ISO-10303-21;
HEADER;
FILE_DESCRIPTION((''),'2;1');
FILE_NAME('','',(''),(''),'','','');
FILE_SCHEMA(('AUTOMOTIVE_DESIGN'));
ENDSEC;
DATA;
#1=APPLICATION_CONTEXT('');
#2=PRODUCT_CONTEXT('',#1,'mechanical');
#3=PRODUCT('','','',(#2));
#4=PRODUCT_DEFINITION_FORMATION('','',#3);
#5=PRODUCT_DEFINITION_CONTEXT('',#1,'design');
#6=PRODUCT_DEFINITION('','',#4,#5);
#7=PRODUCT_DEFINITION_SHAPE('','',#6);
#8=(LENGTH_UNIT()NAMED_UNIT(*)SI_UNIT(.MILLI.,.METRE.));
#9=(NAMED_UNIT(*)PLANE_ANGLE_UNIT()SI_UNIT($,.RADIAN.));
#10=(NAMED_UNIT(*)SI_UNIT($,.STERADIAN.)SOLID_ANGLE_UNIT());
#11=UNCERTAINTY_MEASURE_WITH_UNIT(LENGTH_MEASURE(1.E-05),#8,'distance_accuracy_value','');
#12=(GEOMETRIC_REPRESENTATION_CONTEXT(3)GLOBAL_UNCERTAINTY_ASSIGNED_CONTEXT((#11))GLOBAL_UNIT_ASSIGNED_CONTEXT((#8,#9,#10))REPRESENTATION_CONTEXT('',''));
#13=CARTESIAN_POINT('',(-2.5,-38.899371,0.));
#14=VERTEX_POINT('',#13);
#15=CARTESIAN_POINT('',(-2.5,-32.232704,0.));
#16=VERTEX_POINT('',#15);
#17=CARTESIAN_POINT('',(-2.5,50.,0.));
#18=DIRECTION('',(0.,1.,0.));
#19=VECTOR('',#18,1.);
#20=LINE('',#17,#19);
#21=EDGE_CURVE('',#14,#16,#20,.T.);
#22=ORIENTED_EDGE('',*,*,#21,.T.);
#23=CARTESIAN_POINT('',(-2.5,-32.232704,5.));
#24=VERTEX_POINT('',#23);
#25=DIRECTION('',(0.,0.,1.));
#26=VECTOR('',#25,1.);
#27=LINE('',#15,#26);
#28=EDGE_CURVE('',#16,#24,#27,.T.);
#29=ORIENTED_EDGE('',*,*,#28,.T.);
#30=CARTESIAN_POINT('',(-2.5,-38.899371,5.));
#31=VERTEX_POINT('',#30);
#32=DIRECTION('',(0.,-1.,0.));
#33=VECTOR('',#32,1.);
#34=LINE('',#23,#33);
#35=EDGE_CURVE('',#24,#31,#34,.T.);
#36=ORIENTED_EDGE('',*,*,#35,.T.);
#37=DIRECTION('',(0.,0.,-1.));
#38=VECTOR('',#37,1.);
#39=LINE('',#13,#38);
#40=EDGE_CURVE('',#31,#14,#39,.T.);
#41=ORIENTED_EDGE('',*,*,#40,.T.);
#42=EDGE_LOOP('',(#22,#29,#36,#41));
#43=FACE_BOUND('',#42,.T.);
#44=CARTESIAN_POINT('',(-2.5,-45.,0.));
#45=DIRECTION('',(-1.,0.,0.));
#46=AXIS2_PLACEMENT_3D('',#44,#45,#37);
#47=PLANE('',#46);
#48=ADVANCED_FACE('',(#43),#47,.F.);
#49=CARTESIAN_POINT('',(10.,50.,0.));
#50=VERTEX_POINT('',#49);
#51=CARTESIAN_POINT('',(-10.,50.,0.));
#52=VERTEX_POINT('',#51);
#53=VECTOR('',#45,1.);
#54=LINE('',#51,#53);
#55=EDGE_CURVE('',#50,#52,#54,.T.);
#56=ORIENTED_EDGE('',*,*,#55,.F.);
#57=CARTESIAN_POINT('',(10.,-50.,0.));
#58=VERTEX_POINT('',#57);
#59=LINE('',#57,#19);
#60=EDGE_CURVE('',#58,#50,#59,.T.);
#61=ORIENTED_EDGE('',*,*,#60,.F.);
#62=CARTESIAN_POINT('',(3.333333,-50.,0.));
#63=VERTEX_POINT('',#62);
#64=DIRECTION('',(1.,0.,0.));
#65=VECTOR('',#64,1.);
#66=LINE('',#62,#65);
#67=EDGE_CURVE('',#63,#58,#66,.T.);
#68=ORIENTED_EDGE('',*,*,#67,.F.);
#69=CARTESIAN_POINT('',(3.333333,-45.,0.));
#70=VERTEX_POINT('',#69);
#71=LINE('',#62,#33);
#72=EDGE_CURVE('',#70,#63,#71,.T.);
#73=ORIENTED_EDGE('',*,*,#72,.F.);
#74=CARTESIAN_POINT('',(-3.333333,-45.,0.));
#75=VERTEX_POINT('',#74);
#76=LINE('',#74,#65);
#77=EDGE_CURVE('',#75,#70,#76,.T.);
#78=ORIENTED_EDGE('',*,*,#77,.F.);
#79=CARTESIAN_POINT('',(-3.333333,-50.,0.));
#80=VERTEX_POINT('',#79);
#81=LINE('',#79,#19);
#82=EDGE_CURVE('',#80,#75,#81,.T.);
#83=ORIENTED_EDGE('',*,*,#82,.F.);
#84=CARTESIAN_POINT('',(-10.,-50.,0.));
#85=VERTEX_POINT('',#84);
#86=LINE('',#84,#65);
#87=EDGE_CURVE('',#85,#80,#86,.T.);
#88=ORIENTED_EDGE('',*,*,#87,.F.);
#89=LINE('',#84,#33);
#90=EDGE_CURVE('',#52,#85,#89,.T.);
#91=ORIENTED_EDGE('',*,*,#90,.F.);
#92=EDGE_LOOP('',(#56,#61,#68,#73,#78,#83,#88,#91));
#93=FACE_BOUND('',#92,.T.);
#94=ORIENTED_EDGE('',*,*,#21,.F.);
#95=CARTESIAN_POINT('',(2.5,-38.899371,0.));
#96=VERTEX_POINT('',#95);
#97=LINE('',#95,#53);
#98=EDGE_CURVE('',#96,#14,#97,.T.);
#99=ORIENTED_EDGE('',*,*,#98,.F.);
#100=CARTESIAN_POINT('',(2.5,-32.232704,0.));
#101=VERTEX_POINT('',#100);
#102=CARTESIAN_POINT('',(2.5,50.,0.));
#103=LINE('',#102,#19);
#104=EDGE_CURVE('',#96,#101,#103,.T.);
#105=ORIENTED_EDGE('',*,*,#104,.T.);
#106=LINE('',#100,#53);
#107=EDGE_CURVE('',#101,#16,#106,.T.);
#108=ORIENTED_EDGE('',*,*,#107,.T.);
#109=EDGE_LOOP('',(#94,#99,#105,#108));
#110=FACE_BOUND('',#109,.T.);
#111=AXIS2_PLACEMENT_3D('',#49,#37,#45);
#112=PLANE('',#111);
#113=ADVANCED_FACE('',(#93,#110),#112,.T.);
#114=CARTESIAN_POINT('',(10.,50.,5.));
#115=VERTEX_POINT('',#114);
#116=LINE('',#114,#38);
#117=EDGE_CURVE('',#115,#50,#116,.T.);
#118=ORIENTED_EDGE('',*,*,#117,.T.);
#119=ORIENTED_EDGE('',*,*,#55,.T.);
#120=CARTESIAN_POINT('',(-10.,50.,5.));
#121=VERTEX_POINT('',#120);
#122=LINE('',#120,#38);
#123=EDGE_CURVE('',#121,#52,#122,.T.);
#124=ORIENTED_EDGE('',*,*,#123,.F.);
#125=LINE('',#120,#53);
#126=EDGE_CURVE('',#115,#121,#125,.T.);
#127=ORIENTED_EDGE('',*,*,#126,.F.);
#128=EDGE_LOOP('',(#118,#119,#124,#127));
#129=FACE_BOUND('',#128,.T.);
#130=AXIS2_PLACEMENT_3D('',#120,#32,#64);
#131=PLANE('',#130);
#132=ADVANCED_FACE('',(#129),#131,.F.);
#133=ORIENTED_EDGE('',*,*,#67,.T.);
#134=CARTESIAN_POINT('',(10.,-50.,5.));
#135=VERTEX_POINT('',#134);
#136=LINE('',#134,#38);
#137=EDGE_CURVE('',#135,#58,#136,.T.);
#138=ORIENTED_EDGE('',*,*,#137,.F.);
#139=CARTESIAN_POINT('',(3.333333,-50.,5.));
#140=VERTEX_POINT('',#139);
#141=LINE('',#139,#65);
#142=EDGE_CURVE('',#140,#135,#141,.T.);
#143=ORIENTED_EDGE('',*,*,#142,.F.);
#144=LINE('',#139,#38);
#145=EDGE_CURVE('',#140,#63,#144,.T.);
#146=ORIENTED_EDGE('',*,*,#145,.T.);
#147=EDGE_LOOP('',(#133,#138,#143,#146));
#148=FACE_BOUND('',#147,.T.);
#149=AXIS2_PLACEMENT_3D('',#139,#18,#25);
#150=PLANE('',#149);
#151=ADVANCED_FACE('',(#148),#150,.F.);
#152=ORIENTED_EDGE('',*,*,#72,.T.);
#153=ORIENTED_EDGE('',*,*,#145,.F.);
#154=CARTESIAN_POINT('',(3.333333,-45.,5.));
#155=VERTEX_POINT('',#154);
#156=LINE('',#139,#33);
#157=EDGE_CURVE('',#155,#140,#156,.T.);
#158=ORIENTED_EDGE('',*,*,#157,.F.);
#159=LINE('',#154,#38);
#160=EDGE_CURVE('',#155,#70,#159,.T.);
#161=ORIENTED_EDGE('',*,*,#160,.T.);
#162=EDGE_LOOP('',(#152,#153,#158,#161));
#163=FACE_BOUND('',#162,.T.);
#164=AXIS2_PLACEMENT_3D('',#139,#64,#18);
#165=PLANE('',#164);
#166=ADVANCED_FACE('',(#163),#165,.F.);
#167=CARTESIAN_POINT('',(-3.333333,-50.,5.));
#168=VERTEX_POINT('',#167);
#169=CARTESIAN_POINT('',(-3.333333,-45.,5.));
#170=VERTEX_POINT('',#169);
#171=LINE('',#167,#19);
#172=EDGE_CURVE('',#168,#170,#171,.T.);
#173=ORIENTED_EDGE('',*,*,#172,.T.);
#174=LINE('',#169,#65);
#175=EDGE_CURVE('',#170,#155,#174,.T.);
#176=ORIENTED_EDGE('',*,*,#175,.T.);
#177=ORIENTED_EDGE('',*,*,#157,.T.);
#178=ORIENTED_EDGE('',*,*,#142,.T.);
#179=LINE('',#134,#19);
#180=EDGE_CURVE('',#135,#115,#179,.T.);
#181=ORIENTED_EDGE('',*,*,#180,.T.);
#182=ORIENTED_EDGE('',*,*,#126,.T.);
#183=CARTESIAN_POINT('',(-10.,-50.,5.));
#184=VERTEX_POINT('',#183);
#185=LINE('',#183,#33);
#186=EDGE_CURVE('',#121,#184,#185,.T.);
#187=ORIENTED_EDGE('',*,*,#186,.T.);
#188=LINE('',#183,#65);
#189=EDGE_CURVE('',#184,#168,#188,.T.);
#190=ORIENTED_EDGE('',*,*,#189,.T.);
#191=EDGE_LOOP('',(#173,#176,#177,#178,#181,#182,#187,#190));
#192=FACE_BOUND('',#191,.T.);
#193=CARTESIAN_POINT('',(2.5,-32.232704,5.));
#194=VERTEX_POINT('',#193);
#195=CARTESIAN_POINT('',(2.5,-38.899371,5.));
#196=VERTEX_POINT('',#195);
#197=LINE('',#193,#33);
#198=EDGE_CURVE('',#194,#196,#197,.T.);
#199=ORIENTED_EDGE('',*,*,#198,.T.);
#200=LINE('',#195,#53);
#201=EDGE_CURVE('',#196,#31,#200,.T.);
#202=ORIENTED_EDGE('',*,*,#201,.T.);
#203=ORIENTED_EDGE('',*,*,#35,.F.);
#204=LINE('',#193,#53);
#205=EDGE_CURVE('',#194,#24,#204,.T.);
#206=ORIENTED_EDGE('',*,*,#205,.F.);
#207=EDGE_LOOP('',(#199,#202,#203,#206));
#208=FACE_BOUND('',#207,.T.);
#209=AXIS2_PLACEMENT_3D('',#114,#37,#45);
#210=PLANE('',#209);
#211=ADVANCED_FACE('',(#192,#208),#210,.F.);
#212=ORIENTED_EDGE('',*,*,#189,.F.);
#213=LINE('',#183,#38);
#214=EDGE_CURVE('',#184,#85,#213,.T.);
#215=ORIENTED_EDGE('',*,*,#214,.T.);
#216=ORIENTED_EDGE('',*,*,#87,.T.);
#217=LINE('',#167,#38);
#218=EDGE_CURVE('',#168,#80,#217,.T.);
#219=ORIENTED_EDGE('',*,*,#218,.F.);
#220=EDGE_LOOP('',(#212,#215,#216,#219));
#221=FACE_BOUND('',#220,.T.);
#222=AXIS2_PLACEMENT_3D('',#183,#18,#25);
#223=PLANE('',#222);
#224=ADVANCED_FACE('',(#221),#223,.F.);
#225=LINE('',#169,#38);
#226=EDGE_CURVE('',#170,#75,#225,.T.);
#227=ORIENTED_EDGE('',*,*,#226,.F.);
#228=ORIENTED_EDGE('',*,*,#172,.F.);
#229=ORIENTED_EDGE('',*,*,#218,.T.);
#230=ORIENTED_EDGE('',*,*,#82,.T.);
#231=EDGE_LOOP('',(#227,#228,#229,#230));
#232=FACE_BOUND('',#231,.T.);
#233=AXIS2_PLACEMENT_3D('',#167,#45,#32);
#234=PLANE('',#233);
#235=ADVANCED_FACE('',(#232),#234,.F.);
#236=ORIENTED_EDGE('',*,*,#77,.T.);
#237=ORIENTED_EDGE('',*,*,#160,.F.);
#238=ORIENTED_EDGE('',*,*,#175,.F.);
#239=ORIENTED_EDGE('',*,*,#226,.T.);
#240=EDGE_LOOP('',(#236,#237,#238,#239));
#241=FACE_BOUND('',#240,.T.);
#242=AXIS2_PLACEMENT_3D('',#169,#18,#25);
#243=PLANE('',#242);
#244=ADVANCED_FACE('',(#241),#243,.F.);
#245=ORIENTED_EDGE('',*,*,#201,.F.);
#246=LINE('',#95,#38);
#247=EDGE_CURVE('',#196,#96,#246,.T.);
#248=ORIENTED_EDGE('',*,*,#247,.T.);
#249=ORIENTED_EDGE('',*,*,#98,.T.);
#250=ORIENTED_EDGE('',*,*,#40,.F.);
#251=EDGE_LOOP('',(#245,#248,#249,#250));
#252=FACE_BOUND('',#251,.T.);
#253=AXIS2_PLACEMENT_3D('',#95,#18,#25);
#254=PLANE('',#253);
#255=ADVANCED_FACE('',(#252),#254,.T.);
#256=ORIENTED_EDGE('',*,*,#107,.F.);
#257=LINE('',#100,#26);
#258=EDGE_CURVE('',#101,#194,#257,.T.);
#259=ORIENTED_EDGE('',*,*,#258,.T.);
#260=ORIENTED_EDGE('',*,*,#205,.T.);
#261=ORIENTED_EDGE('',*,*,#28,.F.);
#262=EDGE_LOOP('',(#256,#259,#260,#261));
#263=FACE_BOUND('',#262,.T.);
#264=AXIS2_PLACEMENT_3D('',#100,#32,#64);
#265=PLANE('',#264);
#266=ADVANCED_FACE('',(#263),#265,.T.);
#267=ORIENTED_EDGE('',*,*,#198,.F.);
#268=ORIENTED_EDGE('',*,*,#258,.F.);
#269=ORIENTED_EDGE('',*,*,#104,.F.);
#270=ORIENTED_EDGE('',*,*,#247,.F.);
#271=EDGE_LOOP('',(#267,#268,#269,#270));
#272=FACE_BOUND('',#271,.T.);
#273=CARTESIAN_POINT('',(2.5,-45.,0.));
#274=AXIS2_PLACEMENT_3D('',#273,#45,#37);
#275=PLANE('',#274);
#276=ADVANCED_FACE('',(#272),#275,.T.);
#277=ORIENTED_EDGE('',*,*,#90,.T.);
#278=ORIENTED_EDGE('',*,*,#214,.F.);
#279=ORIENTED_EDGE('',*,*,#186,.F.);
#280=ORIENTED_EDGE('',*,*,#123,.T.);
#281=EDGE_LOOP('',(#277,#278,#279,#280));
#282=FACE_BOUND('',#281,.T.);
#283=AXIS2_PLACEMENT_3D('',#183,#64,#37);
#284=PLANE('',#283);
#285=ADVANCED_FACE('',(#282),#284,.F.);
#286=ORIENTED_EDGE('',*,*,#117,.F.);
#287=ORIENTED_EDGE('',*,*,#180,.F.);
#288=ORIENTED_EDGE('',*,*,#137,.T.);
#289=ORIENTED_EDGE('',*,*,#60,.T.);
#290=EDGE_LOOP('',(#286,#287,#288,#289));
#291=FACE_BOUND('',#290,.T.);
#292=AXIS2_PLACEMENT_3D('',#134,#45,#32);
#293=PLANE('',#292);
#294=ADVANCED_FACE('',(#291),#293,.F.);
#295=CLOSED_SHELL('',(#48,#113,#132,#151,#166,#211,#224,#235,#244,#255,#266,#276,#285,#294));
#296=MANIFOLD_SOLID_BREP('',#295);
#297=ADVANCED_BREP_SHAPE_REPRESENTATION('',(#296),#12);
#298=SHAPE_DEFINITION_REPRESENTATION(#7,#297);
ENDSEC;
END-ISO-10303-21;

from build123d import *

# Parameters (mm, degrees)
BOSS_EXTRUDE1_DEPTH = 5
CAVITY1_START       = -38.899371069
CAVITY1_OUTLINE_W   = 5
CAVITY1_OUTLINE_H   = 5
CAVITY1_DEPTH       = 6.666666666


# Read off the part's stored shape, not the designer's step: Cavity1
with BuildPart() as part:
    # Sketch1 → Boss-Extrude1 (new body)
    with BuildSketch(Plane.XY):
        Polygon((3.333333333, -50), (10, -50), (10, 50), (-10, 50), (-10, -50), (-3.333333333, -50), (-3.333333333, -45), (3.333333333, -45), align=None)
    extrude(amount=BOSS_EXTRUDE1_DEPTH)

    # Cavity1 outline → Cavity1 (cut)
    with BuildSketch(Plane(origin=(0, 0, 0), x_dir=(1, 0, 0), z_dir=(0, 1, 0)).offset(CAVITY1_START)):
        with Locations((0, -2.5)):
            Rectangle(CAVITY1_OUTLINE_W, CAVITY1_OUTLINE_H)
    extrude(amount=CAVITY1_DEPTH, mode=Mode.SUBTRACT)


solid = part.part
